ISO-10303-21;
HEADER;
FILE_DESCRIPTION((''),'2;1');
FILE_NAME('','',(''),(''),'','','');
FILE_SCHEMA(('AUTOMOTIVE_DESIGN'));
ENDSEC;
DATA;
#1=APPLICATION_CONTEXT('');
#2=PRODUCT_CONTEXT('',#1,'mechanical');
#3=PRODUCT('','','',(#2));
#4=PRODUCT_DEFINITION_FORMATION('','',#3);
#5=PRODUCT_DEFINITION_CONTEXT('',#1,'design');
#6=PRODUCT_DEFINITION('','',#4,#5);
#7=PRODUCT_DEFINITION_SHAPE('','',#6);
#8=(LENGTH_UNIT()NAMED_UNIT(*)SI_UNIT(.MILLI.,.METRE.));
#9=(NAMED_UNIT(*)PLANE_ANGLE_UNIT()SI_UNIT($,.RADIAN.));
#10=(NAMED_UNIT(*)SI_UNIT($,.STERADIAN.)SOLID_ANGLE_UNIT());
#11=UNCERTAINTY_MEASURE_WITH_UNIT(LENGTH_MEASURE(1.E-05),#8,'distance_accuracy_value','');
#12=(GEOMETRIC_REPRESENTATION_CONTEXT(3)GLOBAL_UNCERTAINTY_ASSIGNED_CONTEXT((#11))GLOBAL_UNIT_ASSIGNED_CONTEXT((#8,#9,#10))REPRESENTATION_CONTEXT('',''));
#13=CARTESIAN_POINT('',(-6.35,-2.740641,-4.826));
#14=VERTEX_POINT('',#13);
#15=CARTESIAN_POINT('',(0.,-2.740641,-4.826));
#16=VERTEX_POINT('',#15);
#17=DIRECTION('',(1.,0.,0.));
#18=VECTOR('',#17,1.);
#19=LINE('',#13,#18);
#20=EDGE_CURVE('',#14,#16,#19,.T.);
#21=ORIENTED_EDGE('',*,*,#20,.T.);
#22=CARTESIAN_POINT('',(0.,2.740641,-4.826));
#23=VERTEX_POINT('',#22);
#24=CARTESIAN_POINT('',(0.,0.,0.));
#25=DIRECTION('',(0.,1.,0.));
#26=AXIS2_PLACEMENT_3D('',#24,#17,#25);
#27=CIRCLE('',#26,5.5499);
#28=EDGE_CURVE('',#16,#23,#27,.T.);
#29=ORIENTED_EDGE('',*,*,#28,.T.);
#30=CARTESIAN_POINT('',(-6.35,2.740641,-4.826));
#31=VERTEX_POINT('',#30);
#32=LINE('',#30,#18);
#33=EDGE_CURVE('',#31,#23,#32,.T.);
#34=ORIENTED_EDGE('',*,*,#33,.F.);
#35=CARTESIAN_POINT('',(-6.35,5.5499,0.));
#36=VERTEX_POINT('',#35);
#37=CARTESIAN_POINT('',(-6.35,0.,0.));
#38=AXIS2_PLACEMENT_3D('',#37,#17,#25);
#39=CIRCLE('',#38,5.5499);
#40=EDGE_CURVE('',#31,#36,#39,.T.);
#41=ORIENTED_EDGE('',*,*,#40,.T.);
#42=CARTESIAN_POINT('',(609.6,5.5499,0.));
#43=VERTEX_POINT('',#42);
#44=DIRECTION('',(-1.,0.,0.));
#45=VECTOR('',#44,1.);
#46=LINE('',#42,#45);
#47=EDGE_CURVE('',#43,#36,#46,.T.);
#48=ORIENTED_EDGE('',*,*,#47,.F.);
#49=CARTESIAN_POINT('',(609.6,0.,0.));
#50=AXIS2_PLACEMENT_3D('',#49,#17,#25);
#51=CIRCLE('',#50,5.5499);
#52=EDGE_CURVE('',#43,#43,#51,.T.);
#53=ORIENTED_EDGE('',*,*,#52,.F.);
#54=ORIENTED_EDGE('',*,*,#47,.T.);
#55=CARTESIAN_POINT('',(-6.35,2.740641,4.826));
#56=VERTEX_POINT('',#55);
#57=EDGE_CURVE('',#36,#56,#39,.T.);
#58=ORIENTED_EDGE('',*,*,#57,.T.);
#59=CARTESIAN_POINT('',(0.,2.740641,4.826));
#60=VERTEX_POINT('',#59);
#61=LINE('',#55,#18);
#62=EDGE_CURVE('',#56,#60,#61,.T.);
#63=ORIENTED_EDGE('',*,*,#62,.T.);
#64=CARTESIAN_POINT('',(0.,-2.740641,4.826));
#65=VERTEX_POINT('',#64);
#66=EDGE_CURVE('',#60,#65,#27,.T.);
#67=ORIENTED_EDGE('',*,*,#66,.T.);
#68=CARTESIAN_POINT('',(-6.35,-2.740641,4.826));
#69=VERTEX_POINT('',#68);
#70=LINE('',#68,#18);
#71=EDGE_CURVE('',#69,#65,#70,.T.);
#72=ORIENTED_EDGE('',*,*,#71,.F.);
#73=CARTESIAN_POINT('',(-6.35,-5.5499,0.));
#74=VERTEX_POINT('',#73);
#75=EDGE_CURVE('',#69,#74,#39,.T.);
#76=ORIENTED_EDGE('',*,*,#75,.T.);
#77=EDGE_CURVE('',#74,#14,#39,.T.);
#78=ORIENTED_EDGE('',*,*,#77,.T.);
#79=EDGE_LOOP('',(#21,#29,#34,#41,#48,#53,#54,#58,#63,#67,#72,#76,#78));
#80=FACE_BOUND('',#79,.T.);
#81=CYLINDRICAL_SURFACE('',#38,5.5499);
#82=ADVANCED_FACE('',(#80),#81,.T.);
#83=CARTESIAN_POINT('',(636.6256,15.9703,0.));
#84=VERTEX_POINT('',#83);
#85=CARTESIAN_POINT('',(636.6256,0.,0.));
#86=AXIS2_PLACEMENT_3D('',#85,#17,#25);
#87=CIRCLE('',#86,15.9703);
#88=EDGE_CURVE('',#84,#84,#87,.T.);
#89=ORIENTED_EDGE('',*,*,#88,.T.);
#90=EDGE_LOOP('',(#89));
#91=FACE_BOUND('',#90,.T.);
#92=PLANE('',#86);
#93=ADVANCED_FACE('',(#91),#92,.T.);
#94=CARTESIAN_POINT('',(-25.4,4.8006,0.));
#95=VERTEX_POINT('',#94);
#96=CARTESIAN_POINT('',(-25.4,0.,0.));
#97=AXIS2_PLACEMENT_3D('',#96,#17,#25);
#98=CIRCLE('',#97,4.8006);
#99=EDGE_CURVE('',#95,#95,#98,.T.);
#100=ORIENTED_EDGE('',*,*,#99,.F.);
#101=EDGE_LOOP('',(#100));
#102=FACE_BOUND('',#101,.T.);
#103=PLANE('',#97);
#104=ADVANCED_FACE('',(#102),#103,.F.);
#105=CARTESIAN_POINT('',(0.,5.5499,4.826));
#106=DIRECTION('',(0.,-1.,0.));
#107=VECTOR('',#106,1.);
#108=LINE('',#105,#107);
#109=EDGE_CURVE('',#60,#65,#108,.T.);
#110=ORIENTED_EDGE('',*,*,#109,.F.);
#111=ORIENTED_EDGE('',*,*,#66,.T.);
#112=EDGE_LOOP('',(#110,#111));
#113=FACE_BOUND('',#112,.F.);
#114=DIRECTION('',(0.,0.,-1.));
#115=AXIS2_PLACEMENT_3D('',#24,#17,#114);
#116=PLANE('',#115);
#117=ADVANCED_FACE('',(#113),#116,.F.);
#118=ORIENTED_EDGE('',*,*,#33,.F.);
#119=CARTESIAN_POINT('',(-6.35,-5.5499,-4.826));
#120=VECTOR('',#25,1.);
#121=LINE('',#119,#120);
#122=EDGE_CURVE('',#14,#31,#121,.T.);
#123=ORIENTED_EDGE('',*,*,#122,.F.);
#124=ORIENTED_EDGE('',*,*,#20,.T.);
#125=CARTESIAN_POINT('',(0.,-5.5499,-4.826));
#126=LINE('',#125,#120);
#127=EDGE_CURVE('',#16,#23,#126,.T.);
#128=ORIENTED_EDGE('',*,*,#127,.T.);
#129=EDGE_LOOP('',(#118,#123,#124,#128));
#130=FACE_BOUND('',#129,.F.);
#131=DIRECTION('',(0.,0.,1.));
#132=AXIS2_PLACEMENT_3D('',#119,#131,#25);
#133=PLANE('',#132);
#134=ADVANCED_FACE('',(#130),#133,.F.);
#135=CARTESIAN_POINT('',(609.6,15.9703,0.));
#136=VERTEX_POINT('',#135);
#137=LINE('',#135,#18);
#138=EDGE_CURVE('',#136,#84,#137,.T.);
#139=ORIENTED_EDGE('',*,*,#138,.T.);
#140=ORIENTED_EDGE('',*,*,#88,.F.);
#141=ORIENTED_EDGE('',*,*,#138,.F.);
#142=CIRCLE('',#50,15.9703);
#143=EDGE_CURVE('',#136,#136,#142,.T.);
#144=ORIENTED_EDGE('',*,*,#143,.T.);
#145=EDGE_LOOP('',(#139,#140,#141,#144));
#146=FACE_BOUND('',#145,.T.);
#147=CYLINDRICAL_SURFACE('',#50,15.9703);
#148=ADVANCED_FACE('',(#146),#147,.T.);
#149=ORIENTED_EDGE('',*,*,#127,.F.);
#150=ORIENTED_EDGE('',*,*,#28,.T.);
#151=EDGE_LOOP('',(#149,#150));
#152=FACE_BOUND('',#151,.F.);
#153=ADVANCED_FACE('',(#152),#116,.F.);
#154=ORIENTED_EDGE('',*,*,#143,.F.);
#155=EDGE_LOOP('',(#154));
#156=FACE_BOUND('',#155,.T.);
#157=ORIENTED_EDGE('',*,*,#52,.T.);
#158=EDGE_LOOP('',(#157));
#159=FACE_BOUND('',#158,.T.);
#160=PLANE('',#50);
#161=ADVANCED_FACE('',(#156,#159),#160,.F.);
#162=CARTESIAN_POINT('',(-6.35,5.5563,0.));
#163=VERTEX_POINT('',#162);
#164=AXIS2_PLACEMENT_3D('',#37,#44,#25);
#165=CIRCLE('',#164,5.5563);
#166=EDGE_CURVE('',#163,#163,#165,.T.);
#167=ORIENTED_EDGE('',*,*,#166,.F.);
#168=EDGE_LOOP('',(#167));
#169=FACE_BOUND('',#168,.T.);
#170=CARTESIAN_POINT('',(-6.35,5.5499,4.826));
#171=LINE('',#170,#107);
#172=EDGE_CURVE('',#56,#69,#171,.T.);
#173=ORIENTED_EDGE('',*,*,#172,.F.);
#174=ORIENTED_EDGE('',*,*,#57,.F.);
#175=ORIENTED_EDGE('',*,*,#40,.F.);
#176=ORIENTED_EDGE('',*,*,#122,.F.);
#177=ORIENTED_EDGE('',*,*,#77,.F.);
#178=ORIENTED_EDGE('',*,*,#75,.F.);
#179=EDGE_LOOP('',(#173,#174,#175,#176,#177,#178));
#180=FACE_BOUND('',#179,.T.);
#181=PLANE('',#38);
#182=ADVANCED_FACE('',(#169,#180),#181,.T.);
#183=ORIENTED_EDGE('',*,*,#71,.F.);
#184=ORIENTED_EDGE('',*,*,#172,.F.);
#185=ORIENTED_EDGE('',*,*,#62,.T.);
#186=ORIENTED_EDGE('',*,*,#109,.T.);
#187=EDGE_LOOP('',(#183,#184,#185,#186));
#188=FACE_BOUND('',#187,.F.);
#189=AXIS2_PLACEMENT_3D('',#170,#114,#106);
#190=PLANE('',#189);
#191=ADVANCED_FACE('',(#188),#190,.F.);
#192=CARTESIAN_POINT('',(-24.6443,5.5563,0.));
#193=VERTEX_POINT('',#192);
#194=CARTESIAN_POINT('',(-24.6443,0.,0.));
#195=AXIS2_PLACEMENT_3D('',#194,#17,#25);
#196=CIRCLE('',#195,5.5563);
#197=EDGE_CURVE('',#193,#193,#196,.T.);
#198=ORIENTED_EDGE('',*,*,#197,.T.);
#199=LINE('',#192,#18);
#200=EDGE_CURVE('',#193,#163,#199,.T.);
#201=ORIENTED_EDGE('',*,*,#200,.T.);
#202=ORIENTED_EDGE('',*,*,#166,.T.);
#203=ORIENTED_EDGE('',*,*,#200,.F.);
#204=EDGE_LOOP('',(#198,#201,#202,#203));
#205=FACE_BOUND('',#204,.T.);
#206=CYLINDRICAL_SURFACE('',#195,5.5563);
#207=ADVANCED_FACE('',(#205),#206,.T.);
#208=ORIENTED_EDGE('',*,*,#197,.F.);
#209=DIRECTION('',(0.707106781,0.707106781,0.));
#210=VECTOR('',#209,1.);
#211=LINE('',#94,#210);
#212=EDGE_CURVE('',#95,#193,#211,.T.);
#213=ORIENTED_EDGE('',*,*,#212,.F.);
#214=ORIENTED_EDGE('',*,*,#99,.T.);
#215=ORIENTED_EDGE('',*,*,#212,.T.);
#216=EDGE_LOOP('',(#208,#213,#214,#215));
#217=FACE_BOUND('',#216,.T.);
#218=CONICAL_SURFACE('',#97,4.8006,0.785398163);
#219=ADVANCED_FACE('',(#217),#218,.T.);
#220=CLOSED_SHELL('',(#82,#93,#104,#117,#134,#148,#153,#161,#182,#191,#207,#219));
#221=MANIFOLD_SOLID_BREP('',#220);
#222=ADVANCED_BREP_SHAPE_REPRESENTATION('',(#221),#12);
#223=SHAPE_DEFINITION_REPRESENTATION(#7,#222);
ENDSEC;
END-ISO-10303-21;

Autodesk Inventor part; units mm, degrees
sketch "Sketch_1" plane through (0, 0, 0) normal (0, 0, 1) x (1, 0, 0)
  line L0 (636.6256, 0) -> (-6.35, 0)
  line L1 (-6.35, 0) -> (-6.35, 5.5499)
  line L2 (-6.35, 5.5499) -> (609.6, 5.5499)
  line L3 (609.6, 5.5499) -> (609.6, 15.9703)
  line L4 (609.6, 15.9703) -> (636.6256, 15.9703)
  line L5 (636.6256, 15.9703) -> (636.6256, 0)
  line L6 (636.6256, 0) -> (-6.35, 0)
revolve "Revolution1" add sketch "Sketch_1" angle 360 about axis through (636.6256, 0, 0) along (1, 0, 0)
sketch "Sketch_3" plane through (0, 0, 0) normal (0, 0, 1) x (1, 0, 0)
  line L0 (-6.35, 0) -> (-25.4, 0)
  line L1 (-25.4, 0) -> (-25.4, 4.8006)
  line L2 (-25.4, 4.8006) -> (-24.6443, 5.5563)
  line L3 (-24.6443, 5.5563) -> (-6.35, 5.5563)
  line L4 (-6.35, 5.5563) -> (-6.35, 0)
  line L5 (-6.35, 0) -> (-25.4, 0)
revolve "Revolution2" add sketch "Sketch_3" angle 360 about axis through (-6.35, 0, 0) along (1, 0, 0)
thread "Thread1" size "7/16-20 UNF" class "2A" standard "ANSI Unified Screw Threads" full length
sketch "Sketch_10" plane through (-6.35, 0, 0) normal (1, 0, 0) x (0, 0, -1)
  line L0 (-11.0998, -11.0998) -> (11.0998, -11.0998)
  line L1 (11.0998, -11.0998) -> (11.0998, 11.0998)
  line L2 (11.0998, 11.0998) -> (-11.0998, 11.0998)
  line L3 (-11.0998, 11.0998) -> (-11.0998, -11.0998)
  line L4 (-4.826, -5.5499) -> (4.826, -5.5499)
  line L5 (4.826, -5.5499) -> (4.826, 5.5499)
  line L6 (4.826, 5.5499) -> (-4.826, 5.5499)
  line L7 (-4.826, 5.5499) -> (-4.826, -5.5499)
extrude "Extrusion1" cut sketch "Sketch_10" along normal blind 6.35
ref_plane "dia1_XY" through (-6.35, 5.5499, 0) normal (1, 0, 0) x (0, 0, -1)
ref_plane "dia1_YZ" through (-6.35, 5.5499, 0) normal (0, 0, -1) x (0, 1, 0)
ref_plane "dia1_ZX" through (-6.35, 5.5499, 0) normal (0, 1, 0) x (1, 0, 0)
ref_plane "dia12_XY" through (0, 0, 16.8466) normal (1, 0, 0) x (0, 0, -1)
ref_plane "dia12_YZ" through (0, 0, 16.8466) normal (0, 0, -1) x (0, 1, 0)
ref_plane "dia12_ZX" through (0, 0, 16.8466) normal (0, 1, 0) x (1, 0, 0)
ref_plane "dia2_XY" through (-6.35, -5.5499, 0) normal (1, 0, 0) x (0, 0, -1)
ref_plane "dia2_YZ" through (-6.35, -5.5499, 0) normal (0, 0, -1) x (0, 1, 0)
ref_plane "dia2_ZX" through (-6.35, -5.5499, 0) normal (0, 1, 0) x (1, 0, 0)
ref_plane "dia22_XY" through (0, 0, -16.8466) normal (1, 0, 0) x (0, 0, -1)
ref_plane "dia22_YZ" through (0, 0, -16.8466) normal (0, 0, -1) x (0, 1, 0)
ref_plane "dia22_ZX" through (0, 0, -16.8466) normal (0, 1, 0) x (1, 0, 0)
ref_plane "hh1_XY" through (669.1313, 0, 0) normal (0, 0, 1) x (1, 0, 0)
ref_plane "hh1_YZ" through (669.1313, 0, 0) normal (1, 0, 0) x (0, 1, 0)
ref_plane "hh1_ZX" through (669.1313, 0, 0) normal (0, 1, 0) x (0, 0, 1)
ref_plane "hh2_XY" through (675.5448, 0, 0) normal (0, 0, 1) x (1, 0, 0)
ref_plane "hh2_YZ" through (675.5448, 0, 0) normal (1, 0, 0) x (0, 1, 0)
ref_plane "hh2_ZX" through (675.5448, 0, 0) normal (0, 1, 0) x (0, 0, 1)
ref_plane "rl1_XY" through (-25.4, 0, 0) normal (1, 0, 0) x (0, 0, -1)
ref_plane "rl1_YZ" through (-25.4, 0, 0) normal (0, 0, -1) x (0, 1, 0)
ref_plane "rl1_ZX" through (-25.4, 0, 0) normal (0, 1, 0) x (1, 0, 0)
ref_plane "rl2_XY" through (-6.35, 0, 0) normal (1, 0, 0) x (0, 0, -1)
ref_plane "rl2_YZ" through (-6.35, 0, 0) normal (0, 0, -1) x (0, 1, 0)
ref_plane "rl2_ZX" through (-6.35, 0, 0) normal (0, 1, 0) x (1, 0, 0)
ref_plane "rod_cp_XY" through (0, 0, 0) normal (1, 0, 0) x (0, 0, -1)
ref_plane "rod_cp_YZ" through (0, 0, 0) normal (0, 0, -1) x (0, 1, 0)
ref_plane "rod_cp_ZX" through (0, 0, 0) normal (0, 1, 0) x (1, 0, 0)
ref_plane "thd1_XY" through (-25.4, 5.5563, 0) normal (1, 0, 0) x (0, 0, -1)
ref_plane "thd1_YZ" through (-25.4, 5.5563, 0) normal (0, 0, -1) x (0, 1, 0)
ref_plane "thd1_ZX" through (-25.4, 5.5563, 0) normal (0, 1, 0) x (1, 0, 0)
ref_plane "thd2_XY" through (-25.4, -5.5563, 0) normal (1, 0, 0) x (0, 0, -1)
ref_plane "thd2_YZ" through (-25.4, -5.5563, 0) normal (0, 0, -1) x (0, 1, 0)
ref_plane "thd2_ZX" through (-25.4, -5.5563, 0) normal (0, 1, 0) x (1, 0, 0)
ref_plane "to_rod_clevis_XY" through (-31.75, 0, 0) normal (1, 0, 0) x (0, 0, -1)
ref_plane "to_rod_clevis_YZ" through (-31.75, 0, 0) normal (0, 0, -1) x (0, 1, 0)
ref_plane "to_rod_clevis_ZX" through (-31.75, 0, 0) normal (0, 1, 0) x (1, 0, 0)
ref_plane "wf1_XY" through (-6.35, 0, 0) normal (1, 0, 0) x (0, 0, -1)
ref_plane "wf1_YZ" through (-6.35, 0, 0) normal (0, 0, -1) x (0, 1, 0)
ref_plane "wf1_ZX" through (-6.35, 0, 0) normal (0, 1, 0) x (1, 0, 0)
ref_plane "wf2_XY" through (0, 0, 0) normal (1, 0, 0) x (0, 0, -1)
ref_plane "wf2_YZ" through (0, 0, 0) normal (0, 0, -1) x (0, 1, 0)
ref_plane "wf2_ZX" through (0, 0, 0) normal (0, 1, 0) x (1, 0, 0)
ref_plane "wfw1_XY" through (-6.35, 0, -4.826) normal (0, 1, 0) x (1, 0, 0)
ref_plane "wfw1_YZ" through (-6.35, 0, -4.826) normal (1, 0, 0) x (0, 0, -1)
ref_plane "wfw1_ZX" through (-6.35, 0, -4.826) normal (0, 0, -1) x (0, 1, 0)
ref_plane "wfw2_XY" through (-6.35, 0, 4.826) normal (0, 1, 0) x (1, 0, 0)
ref_plane "wfw2_YZ" through (-6.35, 0, 4.826) normal (1, 0, 0) x (0, 0, -1)
ref_plane "wfw2_ZX" through (-6.35, 0, 4.826) normal (0, 0, -1) x (0, 1, 0)
properties part number "SR-1222-DP0000_rod"
